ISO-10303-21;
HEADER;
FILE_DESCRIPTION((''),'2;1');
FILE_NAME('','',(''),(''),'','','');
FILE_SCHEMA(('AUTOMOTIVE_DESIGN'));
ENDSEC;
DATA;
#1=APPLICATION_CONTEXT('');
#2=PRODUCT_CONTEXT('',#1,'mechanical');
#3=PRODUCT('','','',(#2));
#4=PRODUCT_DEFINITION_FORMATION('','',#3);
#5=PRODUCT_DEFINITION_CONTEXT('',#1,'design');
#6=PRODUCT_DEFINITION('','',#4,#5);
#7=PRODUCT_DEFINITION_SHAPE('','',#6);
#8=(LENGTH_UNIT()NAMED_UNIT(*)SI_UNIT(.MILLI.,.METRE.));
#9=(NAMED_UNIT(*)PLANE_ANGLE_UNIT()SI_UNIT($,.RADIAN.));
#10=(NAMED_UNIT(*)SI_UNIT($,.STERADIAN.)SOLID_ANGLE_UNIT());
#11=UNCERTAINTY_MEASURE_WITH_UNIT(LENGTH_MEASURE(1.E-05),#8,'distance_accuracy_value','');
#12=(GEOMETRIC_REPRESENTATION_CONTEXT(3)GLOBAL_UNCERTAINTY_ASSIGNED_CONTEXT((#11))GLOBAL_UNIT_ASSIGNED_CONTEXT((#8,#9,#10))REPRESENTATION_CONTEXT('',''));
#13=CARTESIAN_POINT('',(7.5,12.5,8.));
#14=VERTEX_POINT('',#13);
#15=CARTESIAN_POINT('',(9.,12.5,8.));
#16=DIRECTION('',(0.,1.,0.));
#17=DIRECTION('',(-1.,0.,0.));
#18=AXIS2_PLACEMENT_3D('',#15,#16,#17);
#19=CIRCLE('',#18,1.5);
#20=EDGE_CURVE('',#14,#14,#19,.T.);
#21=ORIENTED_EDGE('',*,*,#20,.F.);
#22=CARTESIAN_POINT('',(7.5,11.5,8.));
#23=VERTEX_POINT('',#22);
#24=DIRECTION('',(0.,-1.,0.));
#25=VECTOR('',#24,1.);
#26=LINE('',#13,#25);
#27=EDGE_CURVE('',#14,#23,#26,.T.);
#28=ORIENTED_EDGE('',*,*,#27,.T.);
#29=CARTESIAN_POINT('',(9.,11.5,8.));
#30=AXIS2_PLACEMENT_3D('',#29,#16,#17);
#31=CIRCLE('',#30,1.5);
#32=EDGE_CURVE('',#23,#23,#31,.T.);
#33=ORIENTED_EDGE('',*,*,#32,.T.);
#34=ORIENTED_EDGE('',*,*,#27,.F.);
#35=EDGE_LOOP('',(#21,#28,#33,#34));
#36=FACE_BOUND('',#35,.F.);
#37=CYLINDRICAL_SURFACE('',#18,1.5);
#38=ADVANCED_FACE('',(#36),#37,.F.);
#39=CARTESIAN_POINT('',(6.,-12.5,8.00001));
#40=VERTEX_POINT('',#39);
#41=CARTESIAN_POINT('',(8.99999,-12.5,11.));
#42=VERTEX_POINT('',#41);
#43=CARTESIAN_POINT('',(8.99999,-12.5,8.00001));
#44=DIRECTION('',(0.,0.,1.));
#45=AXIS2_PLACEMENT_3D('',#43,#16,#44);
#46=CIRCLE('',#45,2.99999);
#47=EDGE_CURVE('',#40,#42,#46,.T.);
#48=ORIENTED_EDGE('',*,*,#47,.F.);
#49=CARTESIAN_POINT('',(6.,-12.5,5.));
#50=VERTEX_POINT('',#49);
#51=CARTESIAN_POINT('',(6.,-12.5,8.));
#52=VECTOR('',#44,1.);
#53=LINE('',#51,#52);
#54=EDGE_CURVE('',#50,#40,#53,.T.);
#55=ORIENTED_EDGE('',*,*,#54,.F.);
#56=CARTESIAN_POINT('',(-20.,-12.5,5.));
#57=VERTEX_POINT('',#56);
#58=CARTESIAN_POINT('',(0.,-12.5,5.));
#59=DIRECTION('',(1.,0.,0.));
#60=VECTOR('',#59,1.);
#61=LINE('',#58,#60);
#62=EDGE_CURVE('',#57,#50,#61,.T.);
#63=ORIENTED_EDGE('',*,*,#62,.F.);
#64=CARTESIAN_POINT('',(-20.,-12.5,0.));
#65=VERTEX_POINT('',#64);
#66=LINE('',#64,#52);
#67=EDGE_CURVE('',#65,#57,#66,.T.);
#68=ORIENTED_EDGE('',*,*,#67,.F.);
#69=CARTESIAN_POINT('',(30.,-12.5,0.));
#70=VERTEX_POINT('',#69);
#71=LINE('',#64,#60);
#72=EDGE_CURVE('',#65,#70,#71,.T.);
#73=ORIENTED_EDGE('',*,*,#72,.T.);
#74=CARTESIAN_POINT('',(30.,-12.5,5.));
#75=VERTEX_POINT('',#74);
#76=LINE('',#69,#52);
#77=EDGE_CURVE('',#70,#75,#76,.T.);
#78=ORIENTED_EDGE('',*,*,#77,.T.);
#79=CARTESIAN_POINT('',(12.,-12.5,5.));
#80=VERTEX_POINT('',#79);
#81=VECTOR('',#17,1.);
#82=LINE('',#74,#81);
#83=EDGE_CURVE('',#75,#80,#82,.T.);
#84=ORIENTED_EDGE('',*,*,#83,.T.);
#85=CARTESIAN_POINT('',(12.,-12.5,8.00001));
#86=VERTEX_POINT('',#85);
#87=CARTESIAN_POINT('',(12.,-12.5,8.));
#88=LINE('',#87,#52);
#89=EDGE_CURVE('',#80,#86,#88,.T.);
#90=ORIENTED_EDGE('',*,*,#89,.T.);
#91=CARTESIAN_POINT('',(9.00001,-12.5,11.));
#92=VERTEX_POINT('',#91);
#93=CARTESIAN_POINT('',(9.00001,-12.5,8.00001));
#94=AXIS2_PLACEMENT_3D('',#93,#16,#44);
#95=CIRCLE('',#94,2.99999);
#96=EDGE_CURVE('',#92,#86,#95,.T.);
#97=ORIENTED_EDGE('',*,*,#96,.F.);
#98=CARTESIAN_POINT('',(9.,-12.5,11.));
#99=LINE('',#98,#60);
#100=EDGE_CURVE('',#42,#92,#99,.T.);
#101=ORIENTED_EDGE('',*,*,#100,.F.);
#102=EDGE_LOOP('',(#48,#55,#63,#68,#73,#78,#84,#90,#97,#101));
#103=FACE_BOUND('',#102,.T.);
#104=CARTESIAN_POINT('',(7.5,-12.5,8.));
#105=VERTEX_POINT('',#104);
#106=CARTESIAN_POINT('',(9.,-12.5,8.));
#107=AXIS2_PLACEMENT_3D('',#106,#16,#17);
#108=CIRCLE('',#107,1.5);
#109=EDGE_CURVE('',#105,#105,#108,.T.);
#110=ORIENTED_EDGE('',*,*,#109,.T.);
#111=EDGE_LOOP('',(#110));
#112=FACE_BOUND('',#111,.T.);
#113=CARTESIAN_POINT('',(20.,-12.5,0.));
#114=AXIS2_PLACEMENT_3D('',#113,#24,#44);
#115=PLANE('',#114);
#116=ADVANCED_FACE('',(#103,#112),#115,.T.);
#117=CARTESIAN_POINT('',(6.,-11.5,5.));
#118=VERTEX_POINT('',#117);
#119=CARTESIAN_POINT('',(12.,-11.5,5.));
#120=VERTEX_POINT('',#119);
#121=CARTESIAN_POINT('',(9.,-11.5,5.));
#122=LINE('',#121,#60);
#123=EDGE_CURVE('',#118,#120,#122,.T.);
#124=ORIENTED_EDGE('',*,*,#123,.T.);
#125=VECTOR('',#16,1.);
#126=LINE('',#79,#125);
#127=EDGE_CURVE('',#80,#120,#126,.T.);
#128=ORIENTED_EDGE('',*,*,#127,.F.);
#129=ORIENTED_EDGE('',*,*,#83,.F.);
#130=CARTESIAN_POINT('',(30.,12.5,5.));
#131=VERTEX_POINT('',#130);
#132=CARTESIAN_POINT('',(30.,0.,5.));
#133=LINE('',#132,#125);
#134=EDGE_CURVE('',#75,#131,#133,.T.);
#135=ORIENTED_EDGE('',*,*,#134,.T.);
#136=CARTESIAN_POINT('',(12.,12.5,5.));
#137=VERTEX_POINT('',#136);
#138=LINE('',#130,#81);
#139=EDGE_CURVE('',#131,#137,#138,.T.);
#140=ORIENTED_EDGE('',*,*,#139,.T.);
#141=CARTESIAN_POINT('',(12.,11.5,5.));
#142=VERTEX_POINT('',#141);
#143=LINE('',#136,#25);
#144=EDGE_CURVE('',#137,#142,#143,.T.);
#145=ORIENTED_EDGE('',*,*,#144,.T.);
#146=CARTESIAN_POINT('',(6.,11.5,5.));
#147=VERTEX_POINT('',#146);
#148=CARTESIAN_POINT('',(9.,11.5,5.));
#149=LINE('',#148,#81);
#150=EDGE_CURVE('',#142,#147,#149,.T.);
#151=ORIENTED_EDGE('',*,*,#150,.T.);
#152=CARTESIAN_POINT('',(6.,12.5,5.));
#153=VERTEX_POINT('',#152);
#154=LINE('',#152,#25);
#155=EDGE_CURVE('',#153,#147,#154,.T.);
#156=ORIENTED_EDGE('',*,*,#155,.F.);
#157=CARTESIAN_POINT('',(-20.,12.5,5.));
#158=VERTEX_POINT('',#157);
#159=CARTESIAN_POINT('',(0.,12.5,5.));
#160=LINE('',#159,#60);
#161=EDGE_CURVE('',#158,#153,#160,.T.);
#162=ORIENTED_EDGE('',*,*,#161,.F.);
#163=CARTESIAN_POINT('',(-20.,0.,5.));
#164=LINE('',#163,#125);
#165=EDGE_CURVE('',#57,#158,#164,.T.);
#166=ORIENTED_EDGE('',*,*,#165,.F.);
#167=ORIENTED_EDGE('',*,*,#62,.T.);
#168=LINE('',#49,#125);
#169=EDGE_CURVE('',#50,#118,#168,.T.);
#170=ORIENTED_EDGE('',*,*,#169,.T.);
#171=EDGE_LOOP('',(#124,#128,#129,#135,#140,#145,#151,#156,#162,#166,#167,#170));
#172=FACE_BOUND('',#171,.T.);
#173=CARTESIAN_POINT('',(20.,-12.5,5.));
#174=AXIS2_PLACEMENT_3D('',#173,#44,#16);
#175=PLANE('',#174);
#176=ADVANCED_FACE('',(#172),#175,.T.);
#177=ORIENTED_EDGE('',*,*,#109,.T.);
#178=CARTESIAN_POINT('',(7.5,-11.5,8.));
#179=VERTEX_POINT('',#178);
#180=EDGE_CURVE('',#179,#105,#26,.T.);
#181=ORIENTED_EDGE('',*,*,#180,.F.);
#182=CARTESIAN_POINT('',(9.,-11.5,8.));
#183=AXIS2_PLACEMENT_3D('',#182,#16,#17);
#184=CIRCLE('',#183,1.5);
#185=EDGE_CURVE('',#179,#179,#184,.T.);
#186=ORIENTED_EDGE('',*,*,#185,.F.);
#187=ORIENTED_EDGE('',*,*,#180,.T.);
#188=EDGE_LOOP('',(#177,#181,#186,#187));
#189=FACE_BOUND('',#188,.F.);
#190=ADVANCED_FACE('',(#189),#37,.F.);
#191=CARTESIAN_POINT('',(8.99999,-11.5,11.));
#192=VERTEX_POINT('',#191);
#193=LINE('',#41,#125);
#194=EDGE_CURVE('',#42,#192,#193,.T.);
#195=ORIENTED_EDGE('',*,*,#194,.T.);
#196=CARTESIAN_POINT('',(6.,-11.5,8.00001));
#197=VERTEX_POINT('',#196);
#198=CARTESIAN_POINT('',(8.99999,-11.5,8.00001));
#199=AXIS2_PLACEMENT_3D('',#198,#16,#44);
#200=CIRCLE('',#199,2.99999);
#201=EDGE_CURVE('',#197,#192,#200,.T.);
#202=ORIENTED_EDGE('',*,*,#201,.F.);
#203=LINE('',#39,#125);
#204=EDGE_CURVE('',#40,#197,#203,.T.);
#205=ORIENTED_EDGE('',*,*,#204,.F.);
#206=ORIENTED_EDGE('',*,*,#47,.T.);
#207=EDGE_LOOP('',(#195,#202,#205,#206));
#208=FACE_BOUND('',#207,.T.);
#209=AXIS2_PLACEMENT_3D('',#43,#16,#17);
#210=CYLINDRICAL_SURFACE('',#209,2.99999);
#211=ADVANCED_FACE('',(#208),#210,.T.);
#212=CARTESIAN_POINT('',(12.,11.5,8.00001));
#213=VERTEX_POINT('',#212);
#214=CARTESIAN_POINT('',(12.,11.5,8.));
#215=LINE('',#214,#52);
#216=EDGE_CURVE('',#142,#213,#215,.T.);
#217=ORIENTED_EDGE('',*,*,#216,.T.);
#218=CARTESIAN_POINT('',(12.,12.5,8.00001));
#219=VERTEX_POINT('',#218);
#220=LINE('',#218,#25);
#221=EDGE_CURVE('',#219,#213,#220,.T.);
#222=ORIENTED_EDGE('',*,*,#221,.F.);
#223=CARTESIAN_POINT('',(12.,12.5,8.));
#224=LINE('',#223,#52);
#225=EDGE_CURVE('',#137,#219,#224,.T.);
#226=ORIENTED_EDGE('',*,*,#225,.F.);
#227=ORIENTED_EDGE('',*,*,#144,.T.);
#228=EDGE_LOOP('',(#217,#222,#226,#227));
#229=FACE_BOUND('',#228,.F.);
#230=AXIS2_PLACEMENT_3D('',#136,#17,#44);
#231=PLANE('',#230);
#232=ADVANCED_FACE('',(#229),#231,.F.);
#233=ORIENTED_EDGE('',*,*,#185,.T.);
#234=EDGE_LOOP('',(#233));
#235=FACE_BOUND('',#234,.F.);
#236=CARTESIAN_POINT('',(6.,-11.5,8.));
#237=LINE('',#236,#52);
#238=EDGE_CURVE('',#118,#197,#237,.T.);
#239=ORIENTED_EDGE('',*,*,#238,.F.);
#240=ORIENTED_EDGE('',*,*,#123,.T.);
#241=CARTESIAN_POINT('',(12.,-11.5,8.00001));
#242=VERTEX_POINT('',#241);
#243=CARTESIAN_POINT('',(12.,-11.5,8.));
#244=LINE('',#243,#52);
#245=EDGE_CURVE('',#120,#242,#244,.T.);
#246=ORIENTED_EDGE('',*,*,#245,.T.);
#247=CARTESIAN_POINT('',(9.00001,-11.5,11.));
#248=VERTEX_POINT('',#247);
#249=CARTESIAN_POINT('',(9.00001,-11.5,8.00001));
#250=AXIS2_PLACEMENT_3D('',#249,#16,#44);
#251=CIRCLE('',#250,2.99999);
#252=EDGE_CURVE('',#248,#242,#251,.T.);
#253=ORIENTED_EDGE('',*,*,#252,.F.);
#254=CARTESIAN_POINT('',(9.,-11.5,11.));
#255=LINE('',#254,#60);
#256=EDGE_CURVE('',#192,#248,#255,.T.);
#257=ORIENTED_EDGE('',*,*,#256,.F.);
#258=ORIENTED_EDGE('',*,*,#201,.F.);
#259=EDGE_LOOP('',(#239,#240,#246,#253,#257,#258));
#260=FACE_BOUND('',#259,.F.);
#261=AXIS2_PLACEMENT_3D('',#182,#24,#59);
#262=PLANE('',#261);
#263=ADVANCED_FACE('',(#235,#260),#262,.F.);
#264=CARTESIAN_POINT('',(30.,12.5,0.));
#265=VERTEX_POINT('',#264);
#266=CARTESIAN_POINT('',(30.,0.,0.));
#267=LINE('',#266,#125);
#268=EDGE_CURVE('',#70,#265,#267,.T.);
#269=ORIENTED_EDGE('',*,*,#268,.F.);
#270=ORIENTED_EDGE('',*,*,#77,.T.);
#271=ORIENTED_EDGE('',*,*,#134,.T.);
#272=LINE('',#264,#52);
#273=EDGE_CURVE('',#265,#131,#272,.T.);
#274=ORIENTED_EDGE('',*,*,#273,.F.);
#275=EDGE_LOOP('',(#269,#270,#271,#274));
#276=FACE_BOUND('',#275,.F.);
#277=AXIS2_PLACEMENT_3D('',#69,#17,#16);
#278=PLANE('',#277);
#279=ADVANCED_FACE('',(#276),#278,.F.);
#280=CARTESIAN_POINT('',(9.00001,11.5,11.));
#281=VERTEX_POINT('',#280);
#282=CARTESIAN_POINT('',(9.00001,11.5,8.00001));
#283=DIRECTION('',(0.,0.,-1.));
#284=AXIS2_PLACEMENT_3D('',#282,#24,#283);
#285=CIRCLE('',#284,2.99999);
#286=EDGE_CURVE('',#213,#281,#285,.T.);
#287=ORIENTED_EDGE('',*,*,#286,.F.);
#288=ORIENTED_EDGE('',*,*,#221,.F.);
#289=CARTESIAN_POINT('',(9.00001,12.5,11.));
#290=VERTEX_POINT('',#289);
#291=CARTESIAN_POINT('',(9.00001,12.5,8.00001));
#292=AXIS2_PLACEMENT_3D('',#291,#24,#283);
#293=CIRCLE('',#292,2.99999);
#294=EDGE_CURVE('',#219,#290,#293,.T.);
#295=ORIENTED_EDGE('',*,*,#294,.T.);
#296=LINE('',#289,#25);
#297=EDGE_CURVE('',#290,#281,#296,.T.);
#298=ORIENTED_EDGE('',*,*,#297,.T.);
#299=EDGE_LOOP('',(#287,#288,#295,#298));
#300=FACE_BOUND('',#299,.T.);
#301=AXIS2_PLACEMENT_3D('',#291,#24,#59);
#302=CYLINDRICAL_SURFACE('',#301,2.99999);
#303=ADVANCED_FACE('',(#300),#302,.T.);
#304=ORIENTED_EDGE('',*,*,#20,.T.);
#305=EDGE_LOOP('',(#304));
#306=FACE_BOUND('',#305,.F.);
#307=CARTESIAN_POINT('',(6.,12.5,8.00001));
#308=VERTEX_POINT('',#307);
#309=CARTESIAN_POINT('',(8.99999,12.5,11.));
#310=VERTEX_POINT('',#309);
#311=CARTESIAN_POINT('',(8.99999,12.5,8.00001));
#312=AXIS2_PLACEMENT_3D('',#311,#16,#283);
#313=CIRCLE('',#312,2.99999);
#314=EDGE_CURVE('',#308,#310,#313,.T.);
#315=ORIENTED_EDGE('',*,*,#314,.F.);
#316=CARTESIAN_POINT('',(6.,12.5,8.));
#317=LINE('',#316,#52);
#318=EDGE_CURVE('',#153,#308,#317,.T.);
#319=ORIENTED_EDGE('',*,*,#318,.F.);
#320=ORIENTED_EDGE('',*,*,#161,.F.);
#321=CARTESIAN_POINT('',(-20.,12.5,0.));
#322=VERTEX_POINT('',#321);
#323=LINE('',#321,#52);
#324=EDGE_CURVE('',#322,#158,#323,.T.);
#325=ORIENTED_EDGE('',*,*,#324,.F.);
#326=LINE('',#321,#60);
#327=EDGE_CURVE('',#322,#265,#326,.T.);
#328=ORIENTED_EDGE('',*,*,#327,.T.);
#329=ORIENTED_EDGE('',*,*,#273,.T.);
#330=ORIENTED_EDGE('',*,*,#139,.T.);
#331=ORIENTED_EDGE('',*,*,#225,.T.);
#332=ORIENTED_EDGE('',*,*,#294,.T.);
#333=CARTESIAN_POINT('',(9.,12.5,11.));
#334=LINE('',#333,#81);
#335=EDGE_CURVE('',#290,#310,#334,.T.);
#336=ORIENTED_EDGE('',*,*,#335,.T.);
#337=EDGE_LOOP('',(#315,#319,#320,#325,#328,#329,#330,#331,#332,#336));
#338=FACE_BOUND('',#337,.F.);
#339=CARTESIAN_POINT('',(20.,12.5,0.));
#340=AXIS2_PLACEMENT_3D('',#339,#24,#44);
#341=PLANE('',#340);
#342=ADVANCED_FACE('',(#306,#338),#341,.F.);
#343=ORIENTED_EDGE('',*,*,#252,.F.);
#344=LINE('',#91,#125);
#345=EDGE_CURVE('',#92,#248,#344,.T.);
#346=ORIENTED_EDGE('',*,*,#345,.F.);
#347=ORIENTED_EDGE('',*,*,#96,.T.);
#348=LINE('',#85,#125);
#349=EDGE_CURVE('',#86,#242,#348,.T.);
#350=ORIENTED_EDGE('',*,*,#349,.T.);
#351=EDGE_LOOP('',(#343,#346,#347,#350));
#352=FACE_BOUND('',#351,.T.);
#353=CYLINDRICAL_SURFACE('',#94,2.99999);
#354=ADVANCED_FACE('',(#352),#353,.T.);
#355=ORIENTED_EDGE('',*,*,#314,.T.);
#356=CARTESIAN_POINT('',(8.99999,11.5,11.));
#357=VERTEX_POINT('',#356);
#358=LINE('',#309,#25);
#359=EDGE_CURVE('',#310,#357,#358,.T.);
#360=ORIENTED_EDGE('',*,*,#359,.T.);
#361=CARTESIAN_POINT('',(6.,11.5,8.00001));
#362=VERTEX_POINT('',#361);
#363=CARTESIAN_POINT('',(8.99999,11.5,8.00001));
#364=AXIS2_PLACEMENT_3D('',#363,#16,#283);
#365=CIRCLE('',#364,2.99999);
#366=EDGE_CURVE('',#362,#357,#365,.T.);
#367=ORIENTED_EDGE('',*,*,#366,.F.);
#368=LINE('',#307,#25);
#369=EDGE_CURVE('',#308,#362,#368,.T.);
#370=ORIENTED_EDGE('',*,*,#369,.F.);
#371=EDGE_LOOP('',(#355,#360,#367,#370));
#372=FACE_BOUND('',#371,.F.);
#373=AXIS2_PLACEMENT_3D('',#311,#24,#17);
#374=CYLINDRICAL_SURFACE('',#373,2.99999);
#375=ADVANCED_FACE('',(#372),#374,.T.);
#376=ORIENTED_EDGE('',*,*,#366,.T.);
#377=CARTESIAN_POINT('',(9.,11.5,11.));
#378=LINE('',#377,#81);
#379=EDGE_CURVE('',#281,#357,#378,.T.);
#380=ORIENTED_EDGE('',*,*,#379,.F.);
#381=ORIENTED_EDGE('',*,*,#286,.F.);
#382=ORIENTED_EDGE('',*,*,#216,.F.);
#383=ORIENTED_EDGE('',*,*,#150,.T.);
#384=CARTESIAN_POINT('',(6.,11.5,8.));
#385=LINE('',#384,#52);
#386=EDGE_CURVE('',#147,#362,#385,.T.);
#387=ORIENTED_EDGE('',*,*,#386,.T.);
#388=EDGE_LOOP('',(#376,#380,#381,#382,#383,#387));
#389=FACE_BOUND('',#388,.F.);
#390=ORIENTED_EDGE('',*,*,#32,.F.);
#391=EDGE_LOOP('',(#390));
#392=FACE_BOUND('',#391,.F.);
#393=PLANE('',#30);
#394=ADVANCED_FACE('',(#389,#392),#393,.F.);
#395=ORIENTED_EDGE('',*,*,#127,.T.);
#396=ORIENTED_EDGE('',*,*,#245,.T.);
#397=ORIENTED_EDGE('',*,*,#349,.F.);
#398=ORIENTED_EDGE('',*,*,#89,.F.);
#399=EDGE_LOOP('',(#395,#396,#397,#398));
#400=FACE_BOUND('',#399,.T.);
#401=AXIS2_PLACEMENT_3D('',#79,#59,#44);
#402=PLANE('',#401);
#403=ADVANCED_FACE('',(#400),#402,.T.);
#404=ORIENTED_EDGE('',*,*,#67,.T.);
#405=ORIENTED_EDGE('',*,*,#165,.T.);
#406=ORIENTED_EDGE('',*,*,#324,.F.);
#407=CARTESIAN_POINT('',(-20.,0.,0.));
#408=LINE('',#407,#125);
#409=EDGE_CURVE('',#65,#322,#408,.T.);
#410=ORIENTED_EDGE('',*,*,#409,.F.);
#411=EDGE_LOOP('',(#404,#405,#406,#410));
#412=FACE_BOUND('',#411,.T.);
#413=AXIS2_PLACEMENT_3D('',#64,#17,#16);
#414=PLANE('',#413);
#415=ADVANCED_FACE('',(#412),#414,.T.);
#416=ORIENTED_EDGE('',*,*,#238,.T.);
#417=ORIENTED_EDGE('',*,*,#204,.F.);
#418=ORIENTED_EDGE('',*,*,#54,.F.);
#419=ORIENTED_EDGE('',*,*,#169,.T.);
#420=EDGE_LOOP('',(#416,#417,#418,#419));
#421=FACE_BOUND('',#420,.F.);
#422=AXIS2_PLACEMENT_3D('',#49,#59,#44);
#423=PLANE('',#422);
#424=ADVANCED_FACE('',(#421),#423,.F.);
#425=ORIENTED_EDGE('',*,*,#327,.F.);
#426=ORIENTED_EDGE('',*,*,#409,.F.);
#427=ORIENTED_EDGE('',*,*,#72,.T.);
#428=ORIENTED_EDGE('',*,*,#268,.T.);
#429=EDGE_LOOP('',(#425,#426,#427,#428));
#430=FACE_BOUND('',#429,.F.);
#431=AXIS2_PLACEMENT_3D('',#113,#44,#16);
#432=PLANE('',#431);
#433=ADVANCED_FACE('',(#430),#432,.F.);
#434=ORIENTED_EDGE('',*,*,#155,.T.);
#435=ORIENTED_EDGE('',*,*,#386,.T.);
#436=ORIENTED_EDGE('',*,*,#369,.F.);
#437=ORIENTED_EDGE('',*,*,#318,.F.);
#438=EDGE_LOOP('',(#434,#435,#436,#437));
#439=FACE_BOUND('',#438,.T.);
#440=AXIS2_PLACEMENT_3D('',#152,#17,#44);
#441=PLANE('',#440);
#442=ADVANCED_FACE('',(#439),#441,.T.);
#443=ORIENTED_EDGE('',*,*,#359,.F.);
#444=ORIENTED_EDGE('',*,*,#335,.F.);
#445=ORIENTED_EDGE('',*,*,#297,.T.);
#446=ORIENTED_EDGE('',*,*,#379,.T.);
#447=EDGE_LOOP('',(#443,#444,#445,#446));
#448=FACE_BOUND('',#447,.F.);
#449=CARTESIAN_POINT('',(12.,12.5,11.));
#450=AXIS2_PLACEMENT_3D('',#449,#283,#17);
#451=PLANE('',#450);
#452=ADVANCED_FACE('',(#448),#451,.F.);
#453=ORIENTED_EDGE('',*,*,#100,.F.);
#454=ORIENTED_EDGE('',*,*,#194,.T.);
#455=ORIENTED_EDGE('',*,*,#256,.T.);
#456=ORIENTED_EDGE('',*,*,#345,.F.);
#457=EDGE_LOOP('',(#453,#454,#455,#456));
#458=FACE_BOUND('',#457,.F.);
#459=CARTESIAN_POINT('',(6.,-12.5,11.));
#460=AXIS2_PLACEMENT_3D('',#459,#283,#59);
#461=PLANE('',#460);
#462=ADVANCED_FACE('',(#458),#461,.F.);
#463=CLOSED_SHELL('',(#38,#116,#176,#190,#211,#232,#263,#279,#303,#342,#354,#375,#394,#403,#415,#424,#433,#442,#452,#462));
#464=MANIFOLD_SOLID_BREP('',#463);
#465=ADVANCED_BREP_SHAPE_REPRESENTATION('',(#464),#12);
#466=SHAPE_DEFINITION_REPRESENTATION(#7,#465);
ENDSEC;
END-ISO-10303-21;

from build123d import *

# Parameters (mm, degrees)
F0_W      = 40
F0_H      = 25
F1_DEPTH  = 5
F4_W      = 6
F4_H      = 6
F5_DEPTH  = 1
F3_W      = 6
F3_H      = 6
F6_DEPTH  = 1
F7_R      = 2.99999
F8_R      = 1.5
F9_DEPTH  = 30
F10_DEPTH = 10


# Not quite as in the source:
# - a fillet or chamfer is up to 0.001 mm smaller than in the source, because OpenCascade refuses the exact size


with BuildPart() as f1:
    # F0 (on Top) → F1 (new body)
    with BuildSketch(Plane.XY):
        Rectangle(F0_W, F0_H)
    extrude(amount=F1_DEPTH)

    # F4 (on face) → F5 (join)
    with BuildSketch(Plane.XZ.offset(12.5)):
        with Locations((9, 8)):
            Rectangle(F4_W, F4_H)
    extrude(amount=-F5_DEPTH)

    # F3 (on face) → F6 (join)
    with BuildSketch(Plane(origin=(0, 12.5, 0), x_dir=(-1, 0, 0), z_dir=(0, 1, 0))):
        with Locations((-9, 8)):
            Rectangle(F3_W, F3_H)
    extrude(amount=-F6_DEPTH)

    # F7 (radius 3 in the source; OpenCascade refuses exactly that, so slightly less here)
    f7_edges = [f1.edges().sort_by_distance(p)[0] for p in [
        (6, 12, 11),
        (12, 12, 11),
        (6, -12, 11),
        (12, -12, 11),
    ]]
    fillet(f7_edges, radius=F7_R)

    # F8 (on face) → F9 (cut)
    with BuildSketch(Plane(origin=(0, 12.5, 0), x_dir=(-1, 0, 0), z_dir=(0, 1, 0))):
        with Locations((-9, 8)):
            Circle(F8_R)
    extrude(amount=-F9_DEPTH, mode=Mode.SUBTRACT)

    # F10 (add): a face of the model
    f10_faces = [f1.faces().sort_by_distance(p)[0] for p in [
        (20, 0, 2.5),
    ]]
    extrude(f10_faces, amount=F10_DEPTH)


solid = f1.part
